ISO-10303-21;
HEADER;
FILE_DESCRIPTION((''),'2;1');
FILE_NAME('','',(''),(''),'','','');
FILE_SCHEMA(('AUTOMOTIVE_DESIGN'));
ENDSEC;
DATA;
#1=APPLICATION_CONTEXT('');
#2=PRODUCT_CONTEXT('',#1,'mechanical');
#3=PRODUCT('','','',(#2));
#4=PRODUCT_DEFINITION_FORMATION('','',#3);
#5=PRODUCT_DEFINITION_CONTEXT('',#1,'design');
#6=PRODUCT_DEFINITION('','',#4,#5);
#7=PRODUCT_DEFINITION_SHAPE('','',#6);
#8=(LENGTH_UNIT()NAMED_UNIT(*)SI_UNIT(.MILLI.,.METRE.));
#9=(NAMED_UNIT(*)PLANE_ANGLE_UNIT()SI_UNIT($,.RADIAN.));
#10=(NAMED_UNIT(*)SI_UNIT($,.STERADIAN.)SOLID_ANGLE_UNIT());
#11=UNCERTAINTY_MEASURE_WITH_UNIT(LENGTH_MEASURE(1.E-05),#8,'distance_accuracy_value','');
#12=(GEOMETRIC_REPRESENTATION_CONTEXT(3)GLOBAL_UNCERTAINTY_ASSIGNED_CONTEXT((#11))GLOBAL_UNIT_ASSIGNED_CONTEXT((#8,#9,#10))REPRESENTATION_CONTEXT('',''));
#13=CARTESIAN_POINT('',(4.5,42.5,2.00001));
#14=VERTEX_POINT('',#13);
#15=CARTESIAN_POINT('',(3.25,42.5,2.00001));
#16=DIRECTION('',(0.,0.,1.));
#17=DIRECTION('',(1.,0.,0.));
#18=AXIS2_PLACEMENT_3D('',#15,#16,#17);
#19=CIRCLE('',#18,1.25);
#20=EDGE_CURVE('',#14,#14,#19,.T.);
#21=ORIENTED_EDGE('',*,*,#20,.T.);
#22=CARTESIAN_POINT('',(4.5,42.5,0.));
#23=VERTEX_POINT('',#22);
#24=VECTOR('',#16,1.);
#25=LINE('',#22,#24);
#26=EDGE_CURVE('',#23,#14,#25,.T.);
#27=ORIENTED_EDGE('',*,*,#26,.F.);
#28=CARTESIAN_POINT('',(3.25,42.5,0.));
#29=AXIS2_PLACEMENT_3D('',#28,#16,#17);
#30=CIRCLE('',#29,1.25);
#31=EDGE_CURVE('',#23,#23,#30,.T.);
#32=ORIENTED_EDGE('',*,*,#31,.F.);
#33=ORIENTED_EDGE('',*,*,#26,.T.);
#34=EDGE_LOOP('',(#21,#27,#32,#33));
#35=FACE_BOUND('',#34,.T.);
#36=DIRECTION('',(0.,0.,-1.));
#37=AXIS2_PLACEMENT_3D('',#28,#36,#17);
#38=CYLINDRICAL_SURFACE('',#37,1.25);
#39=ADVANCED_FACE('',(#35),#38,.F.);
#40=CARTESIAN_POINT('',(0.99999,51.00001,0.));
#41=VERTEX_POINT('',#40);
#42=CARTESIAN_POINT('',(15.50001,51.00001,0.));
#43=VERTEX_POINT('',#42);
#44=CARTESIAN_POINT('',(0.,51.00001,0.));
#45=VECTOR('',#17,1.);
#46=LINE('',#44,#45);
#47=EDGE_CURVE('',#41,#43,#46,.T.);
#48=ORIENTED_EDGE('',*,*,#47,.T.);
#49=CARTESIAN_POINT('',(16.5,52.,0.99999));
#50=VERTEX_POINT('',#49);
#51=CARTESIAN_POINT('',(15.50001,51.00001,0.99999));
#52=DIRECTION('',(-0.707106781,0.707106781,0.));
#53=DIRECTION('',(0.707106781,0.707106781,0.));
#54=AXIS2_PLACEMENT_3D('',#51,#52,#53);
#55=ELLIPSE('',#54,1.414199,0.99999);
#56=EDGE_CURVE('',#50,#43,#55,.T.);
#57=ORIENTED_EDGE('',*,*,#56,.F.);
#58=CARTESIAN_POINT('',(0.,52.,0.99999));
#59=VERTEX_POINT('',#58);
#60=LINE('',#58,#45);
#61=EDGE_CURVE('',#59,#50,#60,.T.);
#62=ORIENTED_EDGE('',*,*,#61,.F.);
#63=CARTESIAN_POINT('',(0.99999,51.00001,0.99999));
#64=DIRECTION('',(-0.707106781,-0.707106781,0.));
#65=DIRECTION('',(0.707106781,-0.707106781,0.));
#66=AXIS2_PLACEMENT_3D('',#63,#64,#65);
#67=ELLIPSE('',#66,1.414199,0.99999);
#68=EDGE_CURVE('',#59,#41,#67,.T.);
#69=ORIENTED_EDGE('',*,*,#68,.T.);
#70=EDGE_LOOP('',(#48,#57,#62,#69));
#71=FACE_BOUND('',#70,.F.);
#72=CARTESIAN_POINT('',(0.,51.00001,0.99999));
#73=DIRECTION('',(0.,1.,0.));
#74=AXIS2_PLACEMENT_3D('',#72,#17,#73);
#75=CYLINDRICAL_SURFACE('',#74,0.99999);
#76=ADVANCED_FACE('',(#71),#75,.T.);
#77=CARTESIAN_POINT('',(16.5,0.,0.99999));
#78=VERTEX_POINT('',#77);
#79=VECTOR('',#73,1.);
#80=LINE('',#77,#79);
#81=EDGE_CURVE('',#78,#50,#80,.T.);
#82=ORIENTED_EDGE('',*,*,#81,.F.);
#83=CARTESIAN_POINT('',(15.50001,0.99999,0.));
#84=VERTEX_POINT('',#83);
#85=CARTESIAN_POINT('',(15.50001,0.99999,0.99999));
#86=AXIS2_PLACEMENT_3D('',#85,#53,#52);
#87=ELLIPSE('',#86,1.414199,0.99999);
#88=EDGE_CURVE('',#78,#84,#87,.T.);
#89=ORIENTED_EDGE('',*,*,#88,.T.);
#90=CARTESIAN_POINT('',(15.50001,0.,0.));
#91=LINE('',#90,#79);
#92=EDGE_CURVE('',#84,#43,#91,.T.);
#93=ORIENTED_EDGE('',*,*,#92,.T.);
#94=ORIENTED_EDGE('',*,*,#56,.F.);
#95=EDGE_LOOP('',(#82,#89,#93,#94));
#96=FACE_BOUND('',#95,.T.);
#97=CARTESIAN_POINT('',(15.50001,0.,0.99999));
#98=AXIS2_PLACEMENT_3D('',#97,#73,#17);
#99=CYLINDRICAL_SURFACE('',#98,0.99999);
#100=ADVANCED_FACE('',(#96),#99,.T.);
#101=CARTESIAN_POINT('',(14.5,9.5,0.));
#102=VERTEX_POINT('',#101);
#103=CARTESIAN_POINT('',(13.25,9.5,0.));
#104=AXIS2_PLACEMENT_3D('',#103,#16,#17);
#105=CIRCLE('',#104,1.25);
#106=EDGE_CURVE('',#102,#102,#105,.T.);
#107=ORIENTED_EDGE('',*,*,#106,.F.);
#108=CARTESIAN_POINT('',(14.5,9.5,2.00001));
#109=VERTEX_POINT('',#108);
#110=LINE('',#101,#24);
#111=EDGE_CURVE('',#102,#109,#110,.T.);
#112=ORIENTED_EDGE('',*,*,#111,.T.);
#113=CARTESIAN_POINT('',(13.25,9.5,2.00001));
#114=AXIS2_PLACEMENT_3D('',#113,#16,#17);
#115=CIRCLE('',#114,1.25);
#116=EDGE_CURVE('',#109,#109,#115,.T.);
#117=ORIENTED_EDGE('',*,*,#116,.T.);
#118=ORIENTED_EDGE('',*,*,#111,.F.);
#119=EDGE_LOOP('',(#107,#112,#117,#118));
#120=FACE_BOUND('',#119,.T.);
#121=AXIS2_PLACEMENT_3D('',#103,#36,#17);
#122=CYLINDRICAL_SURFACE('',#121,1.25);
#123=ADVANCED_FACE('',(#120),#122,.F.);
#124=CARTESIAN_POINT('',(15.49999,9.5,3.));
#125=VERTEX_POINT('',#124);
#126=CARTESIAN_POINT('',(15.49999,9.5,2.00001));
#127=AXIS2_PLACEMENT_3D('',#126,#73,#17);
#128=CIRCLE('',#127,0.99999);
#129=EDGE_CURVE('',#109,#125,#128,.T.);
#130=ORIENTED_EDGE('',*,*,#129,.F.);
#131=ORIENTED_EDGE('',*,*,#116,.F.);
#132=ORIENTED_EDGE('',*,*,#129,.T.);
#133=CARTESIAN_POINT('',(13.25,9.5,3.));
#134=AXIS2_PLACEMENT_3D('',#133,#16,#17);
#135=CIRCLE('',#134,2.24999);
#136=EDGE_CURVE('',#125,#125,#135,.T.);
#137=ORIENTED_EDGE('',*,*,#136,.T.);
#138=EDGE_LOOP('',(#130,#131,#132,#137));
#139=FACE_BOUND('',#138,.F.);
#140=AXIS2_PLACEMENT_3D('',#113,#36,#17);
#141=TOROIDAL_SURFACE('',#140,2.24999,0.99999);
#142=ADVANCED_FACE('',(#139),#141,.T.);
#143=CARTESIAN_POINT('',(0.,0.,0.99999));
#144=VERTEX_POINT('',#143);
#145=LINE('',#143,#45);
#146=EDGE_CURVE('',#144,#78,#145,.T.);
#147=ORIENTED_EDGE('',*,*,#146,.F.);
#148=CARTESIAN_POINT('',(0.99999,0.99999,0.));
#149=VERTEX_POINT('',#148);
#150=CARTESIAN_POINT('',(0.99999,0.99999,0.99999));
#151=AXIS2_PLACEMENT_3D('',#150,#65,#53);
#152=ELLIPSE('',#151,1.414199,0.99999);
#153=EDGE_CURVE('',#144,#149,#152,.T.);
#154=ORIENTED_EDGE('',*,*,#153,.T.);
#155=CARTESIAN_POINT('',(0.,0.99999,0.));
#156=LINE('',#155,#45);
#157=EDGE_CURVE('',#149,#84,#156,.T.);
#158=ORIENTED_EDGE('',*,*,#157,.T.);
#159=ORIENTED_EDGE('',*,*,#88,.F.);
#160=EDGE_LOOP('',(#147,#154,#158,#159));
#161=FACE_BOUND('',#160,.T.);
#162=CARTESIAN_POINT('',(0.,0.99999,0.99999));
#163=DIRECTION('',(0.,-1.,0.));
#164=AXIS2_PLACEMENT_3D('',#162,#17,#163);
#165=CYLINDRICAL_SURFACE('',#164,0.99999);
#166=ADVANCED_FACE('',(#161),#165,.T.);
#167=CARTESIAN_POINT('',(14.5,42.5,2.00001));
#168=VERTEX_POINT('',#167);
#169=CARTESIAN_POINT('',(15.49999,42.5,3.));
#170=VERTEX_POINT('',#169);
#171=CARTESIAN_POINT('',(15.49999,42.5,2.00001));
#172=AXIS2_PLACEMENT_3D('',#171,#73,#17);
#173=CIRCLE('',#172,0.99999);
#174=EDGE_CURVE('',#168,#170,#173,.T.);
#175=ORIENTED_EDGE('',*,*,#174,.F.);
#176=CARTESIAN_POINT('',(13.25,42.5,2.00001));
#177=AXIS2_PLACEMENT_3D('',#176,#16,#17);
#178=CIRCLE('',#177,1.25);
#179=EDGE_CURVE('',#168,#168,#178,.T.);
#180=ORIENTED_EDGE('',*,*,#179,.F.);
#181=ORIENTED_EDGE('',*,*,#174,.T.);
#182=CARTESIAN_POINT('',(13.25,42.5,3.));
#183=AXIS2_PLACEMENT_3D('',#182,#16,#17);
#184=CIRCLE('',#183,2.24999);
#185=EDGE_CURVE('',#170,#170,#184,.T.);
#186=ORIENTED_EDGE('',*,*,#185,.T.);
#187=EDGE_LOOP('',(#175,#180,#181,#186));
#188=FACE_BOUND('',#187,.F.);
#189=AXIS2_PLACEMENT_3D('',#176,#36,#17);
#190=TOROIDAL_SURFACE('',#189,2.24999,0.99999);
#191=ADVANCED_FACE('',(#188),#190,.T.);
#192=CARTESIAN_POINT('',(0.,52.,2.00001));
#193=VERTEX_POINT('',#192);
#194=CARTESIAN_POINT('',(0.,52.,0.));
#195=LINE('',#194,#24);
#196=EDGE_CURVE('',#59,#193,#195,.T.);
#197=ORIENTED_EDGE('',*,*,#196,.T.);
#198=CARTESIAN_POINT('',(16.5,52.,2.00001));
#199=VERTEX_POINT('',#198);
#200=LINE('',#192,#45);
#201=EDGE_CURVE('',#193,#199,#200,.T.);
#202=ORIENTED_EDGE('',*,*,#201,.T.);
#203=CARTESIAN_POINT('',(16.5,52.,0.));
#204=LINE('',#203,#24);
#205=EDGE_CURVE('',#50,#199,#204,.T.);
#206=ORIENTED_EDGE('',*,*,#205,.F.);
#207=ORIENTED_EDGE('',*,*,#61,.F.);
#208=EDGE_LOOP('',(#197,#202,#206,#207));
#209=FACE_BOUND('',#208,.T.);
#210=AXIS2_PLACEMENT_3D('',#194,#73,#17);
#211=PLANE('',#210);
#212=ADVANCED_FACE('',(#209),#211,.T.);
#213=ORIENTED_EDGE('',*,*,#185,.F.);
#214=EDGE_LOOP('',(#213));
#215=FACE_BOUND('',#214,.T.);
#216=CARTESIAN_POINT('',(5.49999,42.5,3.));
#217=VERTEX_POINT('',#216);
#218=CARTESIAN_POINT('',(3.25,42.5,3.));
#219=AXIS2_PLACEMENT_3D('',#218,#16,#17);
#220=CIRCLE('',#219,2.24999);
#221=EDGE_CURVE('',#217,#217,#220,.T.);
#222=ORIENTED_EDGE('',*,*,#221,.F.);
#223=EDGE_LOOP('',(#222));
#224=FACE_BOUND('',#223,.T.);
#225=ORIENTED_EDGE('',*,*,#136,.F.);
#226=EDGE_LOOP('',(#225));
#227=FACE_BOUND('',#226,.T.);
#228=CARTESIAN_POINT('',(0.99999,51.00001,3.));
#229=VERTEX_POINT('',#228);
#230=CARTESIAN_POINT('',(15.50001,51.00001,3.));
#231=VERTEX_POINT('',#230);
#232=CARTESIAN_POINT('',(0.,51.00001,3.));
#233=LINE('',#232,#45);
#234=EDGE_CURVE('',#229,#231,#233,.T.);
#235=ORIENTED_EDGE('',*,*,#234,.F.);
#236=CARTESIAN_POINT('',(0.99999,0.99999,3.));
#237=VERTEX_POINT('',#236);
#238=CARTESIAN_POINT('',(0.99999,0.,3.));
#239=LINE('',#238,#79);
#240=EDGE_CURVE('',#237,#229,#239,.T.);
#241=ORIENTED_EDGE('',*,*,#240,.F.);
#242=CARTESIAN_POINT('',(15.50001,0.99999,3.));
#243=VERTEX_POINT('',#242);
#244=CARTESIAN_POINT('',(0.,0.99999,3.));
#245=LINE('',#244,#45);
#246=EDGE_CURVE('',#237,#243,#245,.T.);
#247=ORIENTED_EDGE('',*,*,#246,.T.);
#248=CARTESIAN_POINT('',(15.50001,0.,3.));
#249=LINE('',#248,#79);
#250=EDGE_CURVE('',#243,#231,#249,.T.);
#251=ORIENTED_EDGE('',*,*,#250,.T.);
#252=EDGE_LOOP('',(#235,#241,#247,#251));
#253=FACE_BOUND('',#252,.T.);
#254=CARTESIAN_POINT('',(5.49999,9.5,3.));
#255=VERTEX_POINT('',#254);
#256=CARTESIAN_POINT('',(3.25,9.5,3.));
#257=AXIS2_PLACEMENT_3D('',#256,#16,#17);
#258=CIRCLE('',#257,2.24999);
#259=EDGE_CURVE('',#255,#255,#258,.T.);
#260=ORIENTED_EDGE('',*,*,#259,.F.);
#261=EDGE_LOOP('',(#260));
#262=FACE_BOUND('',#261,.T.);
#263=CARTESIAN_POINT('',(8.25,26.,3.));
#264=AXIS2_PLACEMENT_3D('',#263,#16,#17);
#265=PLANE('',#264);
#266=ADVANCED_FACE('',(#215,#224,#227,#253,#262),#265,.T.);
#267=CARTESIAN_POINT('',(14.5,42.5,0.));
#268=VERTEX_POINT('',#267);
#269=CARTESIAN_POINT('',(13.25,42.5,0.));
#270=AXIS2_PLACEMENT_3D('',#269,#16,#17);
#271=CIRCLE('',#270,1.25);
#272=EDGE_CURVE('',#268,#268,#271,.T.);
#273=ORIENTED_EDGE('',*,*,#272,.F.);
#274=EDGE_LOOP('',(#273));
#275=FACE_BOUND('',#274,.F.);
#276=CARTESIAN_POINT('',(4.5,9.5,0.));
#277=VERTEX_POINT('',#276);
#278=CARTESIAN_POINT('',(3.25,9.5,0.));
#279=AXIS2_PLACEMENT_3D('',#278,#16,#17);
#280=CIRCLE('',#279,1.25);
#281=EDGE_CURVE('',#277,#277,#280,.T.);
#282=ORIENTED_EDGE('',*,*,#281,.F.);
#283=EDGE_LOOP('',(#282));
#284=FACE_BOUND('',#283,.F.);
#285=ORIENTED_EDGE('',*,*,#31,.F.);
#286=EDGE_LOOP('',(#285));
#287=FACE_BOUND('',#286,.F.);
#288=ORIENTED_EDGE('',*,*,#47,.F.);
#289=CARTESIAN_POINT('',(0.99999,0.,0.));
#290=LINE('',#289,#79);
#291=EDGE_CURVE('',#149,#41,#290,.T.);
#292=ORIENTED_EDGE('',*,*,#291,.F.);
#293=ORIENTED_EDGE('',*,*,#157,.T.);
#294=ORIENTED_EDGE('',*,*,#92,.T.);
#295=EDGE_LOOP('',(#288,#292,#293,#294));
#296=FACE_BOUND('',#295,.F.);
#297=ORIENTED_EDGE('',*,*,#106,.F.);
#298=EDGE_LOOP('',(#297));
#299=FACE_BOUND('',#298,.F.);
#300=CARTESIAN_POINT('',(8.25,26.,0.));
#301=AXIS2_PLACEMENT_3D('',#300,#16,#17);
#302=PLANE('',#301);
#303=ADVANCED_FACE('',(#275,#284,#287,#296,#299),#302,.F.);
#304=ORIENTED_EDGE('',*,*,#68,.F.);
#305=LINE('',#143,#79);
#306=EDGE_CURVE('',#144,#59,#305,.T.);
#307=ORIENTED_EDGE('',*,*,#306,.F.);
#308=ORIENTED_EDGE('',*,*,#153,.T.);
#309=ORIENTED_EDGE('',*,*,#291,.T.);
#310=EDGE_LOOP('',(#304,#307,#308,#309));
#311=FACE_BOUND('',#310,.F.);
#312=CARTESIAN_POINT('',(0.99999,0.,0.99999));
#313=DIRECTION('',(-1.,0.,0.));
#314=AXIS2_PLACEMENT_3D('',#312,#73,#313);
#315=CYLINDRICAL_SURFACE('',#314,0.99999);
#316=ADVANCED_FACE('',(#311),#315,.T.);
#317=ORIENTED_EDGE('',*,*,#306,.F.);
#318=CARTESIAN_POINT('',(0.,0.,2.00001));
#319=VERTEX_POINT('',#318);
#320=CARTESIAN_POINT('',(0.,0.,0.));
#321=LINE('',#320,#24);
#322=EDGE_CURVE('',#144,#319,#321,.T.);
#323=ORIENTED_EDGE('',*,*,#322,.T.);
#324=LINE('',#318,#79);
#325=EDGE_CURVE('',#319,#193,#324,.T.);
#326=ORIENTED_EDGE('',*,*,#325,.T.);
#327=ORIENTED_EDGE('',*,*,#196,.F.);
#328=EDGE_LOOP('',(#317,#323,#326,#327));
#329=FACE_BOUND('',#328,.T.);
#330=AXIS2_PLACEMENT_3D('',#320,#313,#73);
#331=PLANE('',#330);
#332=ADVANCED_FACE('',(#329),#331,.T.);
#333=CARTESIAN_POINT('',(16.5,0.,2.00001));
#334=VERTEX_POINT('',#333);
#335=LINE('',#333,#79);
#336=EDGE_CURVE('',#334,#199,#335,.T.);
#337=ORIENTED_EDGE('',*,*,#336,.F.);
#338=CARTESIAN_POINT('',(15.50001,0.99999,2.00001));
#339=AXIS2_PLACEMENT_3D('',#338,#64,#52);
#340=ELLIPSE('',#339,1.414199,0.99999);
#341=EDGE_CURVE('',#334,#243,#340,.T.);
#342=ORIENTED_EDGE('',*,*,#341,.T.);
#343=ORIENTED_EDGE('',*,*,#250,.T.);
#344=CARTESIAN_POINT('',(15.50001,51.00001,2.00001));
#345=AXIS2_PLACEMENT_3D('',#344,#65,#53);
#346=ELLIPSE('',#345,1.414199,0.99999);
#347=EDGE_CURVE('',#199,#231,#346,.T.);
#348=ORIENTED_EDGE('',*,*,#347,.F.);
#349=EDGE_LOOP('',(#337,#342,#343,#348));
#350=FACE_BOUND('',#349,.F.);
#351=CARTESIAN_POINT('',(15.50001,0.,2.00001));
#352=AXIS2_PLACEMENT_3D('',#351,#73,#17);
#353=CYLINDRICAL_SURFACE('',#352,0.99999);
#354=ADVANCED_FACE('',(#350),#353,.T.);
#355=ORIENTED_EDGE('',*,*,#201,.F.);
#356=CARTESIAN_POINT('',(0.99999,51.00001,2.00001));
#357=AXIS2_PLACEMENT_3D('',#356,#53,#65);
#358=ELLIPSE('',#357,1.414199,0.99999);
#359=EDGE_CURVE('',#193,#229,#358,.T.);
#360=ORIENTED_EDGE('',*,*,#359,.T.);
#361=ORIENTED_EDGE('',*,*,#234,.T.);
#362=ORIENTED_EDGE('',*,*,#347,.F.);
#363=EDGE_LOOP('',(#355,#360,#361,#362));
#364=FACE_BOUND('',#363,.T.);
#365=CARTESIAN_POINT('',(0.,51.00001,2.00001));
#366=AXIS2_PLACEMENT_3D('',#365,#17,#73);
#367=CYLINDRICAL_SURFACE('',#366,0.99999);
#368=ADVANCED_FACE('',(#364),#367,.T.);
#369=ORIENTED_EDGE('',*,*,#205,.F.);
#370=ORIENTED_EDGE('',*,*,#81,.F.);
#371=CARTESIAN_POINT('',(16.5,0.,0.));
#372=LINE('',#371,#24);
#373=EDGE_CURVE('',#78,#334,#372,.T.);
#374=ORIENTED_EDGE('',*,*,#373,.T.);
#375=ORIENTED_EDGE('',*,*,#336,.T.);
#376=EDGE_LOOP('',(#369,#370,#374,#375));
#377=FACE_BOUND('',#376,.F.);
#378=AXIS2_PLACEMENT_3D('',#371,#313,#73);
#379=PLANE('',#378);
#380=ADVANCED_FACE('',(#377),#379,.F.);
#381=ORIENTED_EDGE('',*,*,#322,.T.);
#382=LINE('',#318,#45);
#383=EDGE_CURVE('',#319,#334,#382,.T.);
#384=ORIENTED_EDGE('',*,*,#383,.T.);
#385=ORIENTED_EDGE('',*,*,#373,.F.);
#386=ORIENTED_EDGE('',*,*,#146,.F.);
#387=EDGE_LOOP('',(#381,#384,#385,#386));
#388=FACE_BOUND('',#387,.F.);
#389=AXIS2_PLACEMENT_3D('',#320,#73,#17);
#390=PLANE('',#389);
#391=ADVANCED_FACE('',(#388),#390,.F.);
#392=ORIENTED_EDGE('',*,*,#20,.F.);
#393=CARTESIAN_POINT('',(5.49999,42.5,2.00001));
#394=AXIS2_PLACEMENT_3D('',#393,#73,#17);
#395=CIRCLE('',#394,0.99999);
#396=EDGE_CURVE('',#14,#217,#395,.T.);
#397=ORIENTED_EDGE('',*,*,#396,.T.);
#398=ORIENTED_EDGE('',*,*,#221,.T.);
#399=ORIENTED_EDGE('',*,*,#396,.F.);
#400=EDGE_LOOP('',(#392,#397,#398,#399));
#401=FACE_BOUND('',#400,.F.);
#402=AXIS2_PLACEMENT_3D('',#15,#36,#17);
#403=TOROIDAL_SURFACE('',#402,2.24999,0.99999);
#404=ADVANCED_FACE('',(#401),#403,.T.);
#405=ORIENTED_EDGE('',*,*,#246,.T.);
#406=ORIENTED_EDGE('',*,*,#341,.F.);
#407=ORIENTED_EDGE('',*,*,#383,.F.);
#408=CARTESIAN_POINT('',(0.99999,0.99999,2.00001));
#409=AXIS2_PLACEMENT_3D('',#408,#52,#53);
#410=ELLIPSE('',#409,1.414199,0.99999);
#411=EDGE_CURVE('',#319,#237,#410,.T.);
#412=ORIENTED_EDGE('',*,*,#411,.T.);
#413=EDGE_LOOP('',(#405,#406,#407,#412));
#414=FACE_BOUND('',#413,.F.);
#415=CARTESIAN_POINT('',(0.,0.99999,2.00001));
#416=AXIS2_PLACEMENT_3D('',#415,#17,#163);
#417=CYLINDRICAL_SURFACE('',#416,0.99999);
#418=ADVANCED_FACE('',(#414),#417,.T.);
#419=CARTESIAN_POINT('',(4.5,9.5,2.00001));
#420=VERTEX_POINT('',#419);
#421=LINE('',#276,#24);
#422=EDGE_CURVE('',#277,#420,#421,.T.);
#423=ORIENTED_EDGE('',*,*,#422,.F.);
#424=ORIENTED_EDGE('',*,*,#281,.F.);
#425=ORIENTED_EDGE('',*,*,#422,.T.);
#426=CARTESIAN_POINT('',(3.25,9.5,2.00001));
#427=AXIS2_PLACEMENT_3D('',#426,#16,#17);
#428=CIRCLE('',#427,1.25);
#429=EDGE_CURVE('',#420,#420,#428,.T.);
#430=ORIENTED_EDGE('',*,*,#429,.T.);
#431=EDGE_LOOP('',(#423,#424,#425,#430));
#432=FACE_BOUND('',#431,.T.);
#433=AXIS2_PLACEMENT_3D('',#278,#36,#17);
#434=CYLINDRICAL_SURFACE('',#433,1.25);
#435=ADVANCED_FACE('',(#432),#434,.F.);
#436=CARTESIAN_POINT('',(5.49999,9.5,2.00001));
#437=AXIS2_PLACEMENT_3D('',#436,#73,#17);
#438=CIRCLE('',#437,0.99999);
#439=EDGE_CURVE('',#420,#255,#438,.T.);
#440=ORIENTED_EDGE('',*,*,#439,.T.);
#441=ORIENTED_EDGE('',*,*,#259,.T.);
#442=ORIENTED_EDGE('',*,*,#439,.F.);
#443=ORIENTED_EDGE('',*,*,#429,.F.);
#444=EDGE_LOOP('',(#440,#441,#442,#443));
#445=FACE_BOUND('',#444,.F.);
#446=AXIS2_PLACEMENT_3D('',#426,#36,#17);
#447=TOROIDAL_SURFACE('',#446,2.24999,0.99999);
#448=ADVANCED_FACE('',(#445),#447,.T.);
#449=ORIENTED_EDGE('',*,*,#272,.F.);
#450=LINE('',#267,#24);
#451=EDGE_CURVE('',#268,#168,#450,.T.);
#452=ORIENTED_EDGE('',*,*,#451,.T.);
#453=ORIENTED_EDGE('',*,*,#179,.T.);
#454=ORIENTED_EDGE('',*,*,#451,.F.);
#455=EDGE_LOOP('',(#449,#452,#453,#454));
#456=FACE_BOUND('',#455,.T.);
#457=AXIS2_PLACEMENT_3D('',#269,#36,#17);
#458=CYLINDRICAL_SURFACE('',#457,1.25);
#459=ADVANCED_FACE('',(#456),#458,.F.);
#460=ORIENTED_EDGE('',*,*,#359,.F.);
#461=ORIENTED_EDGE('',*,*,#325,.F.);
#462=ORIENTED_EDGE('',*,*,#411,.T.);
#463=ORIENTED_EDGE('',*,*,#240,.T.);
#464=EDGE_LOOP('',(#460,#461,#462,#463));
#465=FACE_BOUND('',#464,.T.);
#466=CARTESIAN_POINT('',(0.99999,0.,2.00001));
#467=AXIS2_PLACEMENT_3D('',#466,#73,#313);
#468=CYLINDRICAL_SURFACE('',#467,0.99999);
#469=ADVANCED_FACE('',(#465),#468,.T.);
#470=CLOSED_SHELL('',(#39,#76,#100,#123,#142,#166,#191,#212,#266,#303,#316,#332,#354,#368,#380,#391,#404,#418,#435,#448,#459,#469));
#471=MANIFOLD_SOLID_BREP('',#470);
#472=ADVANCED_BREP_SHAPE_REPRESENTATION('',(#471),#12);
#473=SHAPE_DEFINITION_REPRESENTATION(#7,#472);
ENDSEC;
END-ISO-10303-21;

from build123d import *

# Parameters (mm, degrees)
F0_W     = 16.5
F0_H     = 52
F0_R     = 1.25
F1_DEPTH = 3
F2_R     = 0.99999


# Not quite as in the source:
# - a fillet or chamfer is up to 0.001 mm smaller than in the source, because OpenCascade refuses the exact size


with BuildPart() as f1:
    # F0 (on Top) → F1 (new body)
    with BuildSketch(Plane.XY):
        with Locations((8.25, 26)):
            Rectangle(F0_W, F0_H)
        with Locations((3.25, 9.5)):
            Circle(F0_R, mode=Mode.SUBTRACT)
        with Locations((13.25, 9.5)):
            Circle(F0_R, mode=Mode.SUBTRACT)
        with Locations((3.25, 42.5)):
            Circle(F0_R, mode=Mode.SUBTRACT)
        with Locations((13.25, 42.5)):
            Circle(F0_R, mode=Mode.SUBTRACT)
    extrude(amount=F1_DEPTH)

    # F2 (radius 1 in the source; OpenCascade refuses exactly that, so slightly less here)
    f2_edges = [f1.edges().sort_by_distance(p)[0] for p in [
        (16.5, 26, 3),
        (8.25, 52, 3),
        (0, 26, 3),
        (8.25, 0, 3),
        (2, 9.5, 3),
        (12, 9.5, 3),
        (2, 42.5, 3),
        (12, 42.5, 3),
        (16.5, 26, 0),
        (8.25, 52, 0),
        (0, 26, 0),
        (8.25, 0, 0),
    ]]
    fillet(f2_edges, radius=F2_R)


solid = f1.part
